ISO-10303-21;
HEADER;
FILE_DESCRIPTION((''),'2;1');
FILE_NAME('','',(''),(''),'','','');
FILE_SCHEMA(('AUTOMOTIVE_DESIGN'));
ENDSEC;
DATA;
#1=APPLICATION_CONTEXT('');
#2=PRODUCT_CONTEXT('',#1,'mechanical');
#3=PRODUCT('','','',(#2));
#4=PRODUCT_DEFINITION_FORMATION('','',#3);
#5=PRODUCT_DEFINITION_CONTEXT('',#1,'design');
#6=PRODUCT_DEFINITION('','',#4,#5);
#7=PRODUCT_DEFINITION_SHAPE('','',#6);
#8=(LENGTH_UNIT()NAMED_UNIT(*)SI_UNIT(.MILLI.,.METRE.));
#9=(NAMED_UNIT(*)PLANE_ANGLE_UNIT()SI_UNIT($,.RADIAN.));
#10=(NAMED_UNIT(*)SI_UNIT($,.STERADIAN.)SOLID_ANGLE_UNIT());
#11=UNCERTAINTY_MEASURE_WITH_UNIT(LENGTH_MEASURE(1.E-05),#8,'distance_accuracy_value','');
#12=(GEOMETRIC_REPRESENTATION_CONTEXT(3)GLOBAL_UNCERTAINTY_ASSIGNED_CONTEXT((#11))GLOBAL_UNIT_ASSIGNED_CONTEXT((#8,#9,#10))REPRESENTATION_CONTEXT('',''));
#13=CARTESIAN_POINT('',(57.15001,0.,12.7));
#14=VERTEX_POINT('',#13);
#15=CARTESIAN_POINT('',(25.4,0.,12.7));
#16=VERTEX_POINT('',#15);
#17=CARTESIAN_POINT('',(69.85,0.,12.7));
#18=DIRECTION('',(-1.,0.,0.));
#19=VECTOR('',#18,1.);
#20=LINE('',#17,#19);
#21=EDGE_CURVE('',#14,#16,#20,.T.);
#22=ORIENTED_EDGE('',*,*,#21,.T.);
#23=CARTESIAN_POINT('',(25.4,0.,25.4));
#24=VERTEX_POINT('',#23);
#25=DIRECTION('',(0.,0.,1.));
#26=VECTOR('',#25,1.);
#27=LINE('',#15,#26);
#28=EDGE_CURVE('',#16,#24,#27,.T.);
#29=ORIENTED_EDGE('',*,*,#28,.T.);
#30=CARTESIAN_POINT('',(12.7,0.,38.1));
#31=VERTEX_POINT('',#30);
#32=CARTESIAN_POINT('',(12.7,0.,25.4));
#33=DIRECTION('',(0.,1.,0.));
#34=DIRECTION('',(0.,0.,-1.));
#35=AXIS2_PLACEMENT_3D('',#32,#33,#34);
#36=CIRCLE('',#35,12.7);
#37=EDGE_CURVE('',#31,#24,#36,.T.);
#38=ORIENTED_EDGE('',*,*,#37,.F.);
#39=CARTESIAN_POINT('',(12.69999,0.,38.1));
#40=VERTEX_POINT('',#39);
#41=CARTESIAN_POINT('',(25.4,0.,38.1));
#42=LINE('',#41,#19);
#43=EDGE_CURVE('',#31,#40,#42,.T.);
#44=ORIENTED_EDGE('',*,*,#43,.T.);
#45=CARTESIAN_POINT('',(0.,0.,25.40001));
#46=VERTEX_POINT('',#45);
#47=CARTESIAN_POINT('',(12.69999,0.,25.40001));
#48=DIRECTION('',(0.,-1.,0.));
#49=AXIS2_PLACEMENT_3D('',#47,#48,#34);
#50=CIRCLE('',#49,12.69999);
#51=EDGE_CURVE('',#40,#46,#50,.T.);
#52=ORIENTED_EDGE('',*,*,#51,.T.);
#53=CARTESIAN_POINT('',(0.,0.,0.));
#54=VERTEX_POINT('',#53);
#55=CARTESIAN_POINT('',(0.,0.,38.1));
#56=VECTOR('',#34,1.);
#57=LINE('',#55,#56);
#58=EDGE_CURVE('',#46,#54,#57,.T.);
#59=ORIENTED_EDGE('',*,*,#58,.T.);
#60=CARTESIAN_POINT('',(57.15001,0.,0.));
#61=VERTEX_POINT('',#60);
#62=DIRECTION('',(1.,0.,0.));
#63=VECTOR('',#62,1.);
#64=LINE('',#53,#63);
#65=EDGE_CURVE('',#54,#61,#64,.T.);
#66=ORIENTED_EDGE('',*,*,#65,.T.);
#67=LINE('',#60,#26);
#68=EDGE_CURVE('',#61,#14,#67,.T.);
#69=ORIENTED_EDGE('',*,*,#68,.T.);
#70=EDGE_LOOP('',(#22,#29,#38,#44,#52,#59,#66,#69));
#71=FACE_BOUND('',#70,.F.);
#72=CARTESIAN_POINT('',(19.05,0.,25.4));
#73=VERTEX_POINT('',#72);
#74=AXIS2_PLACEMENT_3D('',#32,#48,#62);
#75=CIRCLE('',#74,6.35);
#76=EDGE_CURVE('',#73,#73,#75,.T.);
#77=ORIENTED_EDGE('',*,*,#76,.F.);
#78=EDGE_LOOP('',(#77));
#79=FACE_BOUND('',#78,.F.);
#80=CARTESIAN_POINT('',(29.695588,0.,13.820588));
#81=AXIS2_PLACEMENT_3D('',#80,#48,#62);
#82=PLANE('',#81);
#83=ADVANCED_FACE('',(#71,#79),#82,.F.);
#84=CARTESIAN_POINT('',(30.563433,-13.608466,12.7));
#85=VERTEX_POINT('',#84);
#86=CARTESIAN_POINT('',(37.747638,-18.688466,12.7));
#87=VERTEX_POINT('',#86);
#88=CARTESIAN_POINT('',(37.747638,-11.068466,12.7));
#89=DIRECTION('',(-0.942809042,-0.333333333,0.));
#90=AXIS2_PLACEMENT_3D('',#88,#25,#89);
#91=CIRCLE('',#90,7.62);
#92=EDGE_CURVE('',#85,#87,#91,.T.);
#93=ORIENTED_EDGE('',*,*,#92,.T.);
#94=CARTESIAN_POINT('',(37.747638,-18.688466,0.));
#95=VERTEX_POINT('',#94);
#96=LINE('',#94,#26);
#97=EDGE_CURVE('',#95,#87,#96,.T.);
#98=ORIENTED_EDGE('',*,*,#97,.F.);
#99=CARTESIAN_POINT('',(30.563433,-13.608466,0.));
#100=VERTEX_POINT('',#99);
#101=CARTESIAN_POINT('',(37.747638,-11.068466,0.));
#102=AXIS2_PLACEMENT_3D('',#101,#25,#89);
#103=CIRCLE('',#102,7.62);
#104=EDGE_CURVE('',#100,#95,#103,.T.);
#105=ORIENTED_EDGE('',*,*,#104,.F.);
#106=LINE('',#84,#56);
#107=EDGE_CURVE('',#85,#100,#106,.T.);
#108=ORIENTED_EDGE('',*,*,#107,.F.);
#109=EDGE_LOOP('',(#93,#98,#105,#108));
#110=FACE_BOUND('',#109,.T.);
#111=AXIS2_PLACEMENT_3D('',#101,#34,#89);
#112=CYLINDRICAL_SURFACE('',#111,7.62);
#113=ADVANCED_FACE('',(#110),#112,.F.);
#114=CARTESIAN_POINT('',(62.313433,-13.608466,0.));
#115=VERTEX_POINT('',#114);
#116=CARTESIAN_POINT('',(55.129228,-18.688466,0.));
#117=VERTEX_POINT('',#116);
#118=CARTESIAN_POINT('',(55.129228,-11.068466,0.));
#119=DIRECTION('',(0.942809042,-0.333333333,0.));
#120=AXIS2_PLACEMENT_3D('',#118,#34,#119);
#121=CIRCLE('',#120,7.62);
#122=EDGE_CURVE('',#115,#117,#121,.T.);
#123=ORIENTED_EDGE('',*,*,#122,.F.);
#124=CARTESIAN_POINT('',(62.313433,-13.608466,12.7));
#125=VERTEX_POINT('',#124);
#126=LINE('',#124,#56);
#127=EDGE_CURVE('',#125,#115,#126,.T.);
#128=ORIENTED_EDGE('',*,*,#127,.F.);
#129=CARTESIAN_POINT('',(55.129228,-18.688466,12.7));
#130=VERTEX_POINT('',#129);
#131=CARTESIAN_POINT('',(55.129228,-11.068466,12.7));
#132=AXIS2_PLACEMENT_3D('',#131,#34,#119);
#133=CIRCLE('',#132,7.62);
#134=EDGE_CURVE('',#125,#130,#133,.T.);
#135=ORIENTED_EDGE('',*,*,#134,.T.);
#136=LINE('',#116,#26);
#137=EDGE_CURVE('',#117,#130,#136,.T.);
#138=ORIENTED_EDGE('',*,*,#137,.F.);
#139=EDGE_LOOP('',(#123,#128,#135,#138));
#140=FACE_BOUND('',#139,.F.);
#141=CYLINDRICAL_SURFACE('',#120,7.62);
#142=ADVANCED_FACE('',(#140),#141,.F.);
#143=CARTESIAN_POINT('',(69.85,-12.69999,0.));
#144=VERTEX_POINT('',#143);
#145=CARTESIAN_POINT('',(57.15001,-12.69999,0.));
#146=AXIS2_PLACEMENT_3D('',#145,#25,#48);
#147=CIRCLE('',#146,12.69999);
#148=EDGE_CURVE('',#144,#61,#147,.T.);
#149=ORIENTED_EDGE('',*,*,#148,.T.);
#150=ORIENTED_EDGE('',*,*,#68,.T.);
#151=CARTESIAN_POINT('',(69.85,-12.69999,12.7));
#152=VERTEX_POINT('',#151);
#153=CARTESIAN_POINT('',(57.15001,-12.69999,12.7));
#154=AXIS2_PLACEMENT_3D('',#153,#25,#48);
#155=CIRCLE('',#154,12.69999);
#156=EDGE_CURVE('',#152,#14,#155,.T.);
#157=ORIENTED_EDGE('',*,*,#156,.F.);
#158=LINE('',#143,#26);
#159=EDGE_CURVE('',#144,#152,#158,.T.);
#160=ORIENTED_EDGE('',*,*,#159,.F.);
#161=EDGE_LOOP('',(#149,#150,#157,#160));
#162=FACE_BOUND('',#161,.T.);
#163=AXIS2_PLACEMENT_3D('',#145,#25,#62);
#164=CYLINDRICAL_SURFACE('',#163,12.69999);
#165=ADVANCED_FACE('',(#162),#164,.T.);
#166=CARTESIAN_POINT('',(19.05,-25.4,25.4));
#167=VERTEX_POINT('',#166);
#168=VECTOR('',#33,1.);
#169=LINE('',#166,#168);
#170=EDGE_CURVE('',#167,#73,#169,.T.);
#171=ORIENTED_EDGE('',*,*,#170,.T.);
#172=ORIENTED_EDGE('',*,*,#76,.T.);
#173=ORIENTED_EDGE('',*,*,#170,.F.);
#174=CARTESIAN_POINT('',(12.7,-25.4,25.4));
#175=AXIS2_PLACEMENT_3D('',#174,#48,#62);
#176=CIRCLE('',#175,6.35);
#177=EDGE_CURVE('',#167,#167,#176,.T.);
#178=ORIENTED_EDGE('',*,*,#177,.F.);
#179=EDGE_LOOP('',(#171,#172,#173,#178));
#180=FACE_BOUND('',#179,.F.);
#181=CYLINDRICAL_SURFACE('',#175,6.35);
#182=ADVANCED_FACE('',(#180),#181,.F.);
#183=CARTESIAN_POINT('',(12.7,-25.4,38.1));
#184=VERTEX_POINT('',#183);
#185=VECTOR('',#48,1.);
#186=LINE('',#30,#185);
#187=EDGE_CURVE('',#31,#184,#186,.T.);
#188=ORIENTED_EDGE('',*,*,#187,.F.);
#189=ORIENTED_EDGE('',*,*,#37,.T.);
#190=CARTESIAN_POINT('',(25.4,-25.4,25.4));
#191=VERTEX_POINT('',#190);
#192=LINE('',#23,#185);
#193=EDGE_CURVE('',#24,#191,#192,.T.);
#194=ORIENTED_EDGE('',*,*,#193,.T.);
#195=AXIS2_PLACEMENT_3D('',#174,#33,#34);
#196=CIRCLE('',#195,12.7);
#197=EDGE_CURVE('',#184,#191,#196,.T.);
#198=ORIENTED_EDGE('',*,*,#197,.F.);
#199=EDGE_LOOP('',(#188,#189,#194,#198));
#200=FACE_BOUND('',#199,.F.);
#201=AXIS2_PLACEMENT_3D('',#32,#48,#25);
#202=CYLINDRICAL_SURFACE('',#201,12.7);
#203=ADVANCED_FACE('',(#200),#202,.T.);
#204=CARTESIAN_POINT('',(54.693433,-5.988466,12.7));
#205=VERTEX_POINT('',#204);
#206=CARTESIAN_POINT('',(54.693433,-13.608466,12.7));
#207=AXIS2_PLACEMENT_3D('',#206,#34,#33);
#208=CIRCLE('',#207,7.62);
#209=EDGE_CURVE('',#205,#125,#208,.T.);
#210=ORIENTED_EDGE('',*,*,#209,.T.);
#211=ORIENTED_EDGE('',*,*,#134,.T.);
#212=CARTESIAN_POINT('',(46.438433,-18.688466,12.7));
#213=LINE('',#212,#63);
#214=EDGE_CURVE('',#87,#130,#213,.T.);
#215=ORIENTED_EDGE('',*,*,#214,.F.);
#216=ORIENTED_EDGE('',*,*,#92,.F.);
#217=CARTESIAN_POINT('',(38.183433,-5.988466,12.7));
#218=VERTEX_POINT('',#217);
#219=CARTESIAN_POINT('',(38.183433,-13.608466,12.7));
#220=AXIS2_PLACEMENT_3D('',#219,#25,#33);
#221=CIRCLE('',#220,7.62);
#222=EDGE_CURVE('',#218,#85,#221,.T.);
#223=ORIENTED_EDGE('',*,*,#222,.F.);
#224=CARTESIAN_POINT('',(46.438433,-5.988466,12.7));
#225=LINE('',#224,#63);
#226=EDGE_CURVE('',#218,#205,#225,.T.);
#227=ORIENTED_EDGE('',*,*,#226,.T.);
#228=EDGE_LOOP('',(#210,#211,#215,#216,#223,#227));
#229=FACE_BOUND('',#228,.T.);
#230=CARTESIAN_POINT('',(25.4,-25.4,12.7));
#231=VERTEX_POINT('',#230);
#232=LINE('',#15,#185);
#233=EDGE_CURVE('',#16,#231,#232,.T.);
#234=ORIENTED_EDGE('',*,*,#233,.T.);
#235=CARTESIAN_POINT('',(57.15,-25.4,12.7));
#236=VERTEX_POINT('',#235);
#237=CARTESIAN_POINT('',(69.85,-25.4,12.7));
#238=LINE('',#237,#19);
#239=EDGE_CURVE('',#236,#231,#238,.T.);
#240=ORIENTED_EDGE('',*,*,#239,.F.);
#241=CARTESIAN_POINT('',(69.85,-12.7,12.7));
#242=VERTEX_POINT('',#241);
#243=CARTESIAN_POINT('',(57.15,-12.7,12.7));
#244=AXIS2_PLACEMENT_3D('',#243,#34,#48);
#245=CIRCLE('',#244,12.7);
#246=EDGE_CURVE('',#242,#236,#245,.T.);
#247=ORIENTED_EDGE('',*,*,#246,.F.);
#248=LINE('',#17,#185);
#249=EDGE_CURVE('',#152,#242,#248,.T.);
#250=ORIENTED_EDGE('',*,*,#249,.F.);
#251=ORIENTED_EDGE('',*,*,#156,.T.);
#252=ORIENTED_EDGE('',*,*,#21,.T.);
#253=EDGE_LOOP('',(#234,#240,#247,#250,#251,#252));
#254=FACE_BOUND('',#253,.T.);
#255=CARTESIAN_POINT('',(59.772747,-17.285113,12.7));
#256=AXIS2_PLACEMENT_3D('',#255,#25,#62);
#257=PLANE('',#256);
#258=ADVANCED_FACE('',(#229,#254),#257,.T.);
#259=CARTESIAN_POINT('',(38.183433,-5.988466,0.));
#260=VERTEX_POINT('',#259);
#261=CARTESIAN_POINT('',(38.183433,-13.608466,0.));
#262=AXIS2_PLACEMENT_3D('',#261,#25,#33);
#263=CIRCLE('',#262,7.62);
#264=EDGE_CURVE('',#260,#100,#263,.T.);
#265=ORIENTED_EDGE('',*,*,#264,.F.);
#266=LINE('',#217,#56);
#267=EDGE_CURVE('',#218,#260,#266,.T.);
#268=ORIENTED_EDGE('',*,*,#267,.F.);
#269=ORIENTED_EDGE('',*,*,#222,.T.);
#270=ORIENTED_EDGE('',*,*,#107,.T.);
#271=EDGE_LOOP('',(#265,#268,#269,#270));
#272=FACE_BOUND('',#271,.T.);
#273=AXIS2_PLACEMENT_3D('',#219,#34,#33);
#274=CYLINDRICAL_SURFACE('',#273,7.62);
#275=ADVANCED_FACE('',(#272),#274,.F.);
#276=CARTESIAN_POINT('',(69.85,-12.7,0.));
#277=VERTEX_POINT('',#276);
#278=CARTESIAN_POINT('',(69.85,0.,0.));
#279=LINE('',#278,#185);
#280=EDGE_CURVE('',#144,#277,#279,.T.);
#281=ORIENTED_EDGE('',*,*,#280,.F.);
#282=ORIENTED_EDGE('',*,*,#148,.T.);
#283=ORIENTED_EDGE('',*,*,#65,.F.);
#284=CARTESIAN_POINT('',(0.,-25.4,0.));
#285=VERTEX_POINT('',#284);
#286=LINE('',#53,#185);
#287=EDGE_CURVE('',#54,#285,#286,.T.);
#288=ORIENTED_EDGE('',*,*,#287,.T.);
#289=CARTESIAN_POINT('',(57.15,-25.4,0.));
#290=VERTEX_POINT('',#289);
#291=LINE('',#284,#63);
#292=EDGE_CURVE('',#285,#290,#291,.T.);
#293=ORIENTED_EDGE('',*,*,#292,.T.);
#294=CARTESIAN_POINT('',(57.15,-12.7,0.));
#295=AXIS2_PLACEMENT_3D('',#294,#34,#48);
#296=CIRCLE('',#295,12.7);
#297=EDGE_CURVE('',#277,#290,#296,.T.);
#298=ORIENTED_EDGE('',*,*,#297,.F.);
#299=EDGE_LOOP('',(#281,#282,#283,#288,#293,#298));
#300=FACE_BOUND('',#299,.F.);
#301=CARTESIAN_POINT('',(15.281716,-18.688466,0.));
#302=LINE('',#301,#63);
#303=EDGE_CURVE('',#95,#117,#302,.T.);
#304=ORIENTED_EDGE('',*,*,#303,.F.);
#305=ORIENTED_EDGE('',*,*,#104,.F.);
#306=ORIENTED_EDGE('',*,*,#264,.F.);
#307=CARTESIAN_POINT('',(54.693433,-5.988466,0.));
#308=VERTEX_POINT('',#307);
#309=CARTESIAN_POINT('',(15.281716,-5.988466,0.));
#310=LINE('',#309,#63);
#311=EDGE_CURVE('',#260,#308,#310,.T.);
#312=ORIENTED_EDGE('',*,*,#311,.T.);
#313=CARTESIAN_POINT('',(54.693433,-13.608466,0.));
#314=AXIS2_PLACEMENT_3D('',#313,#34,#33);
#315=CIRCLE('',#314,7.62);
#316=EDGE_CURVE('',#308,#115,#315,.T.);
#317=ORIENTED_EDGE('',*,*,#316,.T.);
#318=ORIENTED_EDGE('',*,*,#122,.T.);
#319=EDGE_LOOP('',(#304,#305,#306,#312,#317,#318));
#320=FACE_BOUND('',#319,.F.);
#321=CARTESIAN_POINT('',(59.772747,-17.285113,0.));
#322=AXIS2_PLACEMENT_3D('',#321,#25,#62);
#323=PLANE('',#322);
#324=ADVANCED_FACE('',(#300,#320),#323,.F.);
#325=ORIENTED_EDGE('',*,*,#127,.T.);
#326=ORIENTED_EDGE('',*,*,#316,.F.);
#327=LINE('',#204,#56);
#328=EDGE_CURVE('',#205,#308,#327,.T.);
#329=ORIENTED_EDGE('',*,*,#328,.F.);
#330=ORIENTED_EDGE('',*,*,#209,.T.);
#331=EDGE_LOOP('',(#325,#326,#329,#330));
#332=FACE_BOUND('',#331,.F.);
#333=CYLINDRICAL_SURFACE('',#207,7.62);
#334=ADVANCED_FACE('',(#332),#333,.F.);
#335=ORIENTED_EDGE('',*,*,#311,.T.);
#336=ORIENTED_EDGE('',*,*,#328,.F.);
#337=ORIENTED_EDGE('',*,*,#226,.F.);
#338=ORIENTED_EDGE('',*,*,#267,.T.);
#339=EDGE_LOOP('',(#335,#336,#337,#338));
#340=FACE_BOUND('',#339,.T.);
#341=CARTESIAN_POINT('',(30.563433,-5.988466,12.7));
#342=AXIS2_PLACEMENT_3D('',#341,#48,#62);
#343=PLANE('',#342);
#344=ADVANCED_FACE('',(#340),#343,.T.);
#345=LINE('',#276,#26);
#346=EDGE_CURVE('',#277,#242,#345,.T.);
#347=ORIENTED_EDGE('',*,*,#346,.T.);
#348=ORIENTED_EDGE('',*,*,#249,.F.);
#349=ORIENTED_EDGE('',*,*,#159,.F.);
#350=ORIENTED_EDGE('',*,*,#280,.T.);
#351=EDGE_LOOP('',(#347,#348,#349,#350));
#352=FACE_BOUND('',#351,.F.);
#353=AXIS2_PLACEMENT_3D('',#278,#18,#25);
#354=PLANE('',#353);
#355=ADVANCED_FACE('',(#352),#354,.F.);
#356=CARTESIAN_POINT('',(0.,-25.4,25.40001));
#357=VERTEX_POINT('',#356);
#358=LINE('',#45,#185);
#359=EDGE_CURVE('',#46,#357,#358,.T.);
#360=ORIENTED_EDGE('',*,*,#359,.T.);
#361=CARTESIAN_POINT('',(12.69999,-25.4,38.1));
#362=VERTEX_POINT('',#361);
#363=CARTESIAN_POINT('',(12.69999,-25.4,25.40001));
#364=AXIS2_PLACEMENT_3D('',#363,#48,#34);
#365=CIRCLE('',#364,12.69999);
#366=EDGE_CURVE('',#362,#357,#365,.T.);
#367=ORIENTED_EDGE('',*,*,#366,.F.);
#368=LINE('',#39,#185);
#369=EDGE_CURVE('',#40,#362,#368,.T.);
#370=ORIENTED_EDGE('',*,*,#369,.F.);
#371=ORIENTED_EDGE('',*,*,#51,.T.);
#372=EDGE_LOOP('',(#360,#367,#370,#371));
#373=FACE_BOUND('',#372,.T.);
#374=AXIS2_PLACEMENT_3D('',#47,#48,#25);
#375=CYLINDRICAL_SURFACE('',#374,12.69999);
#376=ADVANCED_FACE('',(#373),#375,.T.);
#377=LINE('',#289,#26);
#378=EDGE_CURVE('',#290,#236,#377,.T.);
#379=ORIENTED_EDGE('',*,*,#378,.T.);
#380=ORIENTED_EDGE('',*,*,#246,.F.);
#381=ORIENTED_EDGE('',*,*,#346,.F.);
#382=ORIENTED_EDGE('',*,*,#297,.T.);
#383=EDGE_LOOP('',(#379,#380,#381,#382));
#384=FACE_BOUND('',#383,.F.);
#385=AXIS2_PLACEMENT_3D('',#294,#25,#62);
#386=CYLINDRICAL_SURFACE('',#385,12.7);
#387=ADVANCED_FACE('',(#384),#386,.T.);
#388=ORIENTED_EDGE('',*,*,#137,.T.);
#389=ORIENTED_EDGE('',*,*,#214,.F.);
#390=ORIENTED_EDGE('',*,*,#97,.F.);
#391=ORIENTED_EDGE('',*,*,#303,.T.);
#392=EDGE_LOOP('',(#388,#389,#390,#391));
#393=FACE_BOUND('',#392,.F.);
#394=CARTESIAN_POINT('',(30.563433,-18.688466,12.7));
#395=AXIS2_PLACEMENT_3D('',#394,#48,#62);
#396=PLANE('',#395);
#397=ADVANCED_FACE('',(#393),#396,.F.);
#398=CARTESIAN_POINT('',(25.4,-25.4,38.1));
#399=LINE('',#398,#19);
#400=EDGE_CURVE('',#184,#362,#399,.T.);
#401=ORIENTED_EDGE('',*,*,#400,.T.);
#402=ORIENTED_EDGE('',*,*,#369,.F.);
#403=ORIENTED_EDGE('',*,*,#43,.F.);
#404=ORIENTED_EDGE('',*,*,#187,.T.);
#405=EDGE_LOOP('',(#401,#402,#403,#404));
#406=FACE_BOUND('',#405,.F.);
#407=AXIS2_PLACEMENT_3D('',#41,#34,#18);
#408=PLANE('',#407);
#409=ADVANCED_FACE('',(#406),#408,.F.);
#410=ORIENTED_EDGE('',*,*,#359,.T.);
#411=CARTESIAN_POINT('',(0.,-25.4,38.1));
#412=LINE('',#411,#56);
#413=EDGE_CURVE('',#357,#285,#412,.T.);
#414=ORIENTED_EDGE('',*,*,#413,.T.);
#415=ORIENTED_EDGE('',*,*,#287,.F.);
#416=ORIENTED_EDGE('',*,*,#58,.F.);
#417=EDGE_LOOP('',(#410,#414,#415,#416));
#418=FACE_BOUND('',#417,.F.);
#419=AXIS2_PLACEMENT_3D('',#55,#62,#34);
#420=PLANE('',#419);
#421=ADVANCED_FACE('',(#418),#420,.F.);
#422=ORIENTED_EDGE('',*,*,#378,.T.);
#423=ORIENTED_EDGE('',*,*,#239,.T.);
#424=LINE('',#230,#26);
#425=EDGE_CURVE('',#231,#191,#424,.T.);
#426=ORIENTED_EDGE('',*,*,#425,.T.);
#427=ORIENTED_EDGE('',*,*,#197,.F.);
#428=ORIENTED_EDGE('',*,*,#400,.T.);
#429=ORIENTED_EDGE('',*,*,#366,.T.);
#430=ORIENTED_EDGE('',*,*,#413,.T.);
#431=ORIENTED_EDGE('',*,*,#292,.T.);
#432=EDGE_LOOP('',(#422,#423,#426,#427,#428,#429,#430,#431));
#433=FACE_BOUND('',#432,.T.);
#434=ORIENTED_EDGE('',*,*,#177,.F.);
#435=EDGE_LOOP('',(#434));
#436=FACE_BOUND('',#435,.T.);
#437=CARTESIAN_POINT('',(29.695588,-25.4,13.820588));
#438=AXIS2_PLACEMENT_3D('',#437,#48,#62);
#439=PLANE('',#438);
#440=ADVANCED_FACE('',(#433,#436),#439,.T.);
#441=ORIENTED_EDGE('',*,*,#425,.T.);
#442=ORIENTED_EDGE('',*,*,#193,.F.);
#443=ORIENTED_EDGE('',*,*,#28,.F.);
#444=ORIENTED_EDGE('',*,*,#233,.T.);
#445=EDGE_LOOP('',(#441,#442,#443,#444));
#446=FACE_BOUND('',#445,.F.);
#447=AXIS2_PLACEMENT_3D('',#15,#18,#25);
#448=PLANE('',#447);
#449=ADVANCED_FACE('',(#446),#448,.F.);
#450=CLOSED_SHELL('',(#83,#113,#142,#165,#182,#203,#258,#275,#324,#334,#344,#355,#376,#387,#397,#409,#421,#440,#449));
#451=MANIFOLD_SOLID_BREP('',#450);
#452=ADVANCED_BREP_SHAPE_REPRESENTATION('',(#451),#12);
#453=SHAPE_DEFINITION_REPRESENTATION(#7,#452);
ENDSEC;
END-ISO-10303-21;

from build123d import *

# Parameters (mm, degrees)
F1_DEPTH     = 25.4
F2_R         = 12.7
F3_R         = 12.69999
F4_R         = 12.7
F5_R         = 12.69999
F6_R         = 6.35
F7_DEPTH     = 25.4
F8_W         = 31.75
F8_H         = 12.7
F9_DEPTH     = 25.4
F10_R        = 7.62
F11_T1_DEPTH = 12.7
F12_R        = 7.62
F13_T1_DEPTH = 12.7


# Not quite as in the source:
# - a fillet or chamfer that OpenCascade refuses, or shapes differently, is made with other operations: its cross-section is extruded or revolved along the edge and cut away or added
# - a fillet or chamfer is up to 0.001 mm smaller than in the source, because OpenCascade refuses the exact size


with BuildPart() as f1:
    # F0 (on Front) → F1 (new body)
    with BuildSketch(Plane.XZ):
        Polygon((0, 38.1), (0, 0), (69.85, 0), (69.85, 12.7), (25.4, 12.7), (25.4, 38.1), align=None)
    extrude(amount=F1_DEPTH)

    # F2
    f2_edges = [f1.edges().sort_by_distance(p)[0] for p in [
        (69.85, -25.4, 6.35),
    ]]
    fillet(f2_edges, radius=F2_R)

    # F3 (radius 12.7 in the source; OpenCascade refuses exactly that, so slightly less here)
    f3_edges = [f1.edges().sort_by_distance(p)[0] for p in [
        (69.85, 0, 6.35),
    ]]
    fillet(f3_edges, radius=F3_R)

    # F4
    f4_edges = [f1.edges().sort_by_distance(p)[0] for p in [
        (25.4, -12.7, 38.1),
    ]]
    fillet(f4_edges, radius=F4_R)

    # F5 (radius 12.7 in the source; OpenCascade refuses exactly that, so slightly less here)
    f5_edges = [f1.edges().sort_by_distance(p)[0] for p in [
        (0, -12.7, 38.1),
    ]]
    fillet(f5_edges, radius=F5_R)

    # F6 (on face) → F7 (cut)
    with BuildSketch(Plane.XZ.offset(25.4)):
        with Locations((12.7, 25.4)):
            Circle(F6_R)
    extrude(amount=-F7_DEPTH, mode=Mode.SUBTRACT)

    # F8 (on face) → F9 (cut)
    with BuildSketch(Plane.XY.offset(12.7)):
        with Locations((46.4384327233, -12.3384663999)):
            Rectangle(F8_W, F8_H)
    extrude(amount=-F9_DEPTH, mode=Mode.SUBTRACT)

    # F10
    f10_edges = [f1.edges().sort_by_distance(p)[0] for p in [
        (30.563433, -5.988466, 6.35),
    ]]
    fillet(f10_edges, radius=F10_R)

    # F11: fillet of radius 7.62 on 1 edges, made by hand

    # F11_s2 → F11_t1 (join)
    with BuildSketch(Plane.XY):
        with BuildLine():
            ThreePointArc((30.5634327233, -13.6084663999), (33.3482285689, -17.2901703466), (37.7476376201, -18.6884663999))
            Line((37.7476376201, -18.6884663999), (30.5634327233, -18.6884663999))
            Line((30.5634327233, -18.6884663999), (30.5634327233, -13.6084663999))
        make_face()
    extrude(amount=F11_T1_DEPTH)

    # F12
    f12_edges = [f1.edges().sort_by_distance(p)[0] for p in [
        (62.313433, -5.988466, 6.35),
    ]]
    fillet(f12_edges, radius=F12_R)

    # F13: fillet of radius 7.62 on 1 edges, made by hand

    # F13_s2 → F13_t1 (join)
    with BuildSketch(Plane.XY):
        with BuildLine():
            ThreePointArc((62.3134327233, -13.6084663999), (59.5286368777, -17.2901703466), (55.1292278264, -18.6884663999))
            Line((55.1292278264, -18.6884663999), (62.3134327233, -18.6884663999))
            Line((62.3134327233, -18.6884663999), (62.3134327233, -13.6084663999))
        make_face()
    extrude(amount=F13_T1_DEPTH)


solid = f1.part
